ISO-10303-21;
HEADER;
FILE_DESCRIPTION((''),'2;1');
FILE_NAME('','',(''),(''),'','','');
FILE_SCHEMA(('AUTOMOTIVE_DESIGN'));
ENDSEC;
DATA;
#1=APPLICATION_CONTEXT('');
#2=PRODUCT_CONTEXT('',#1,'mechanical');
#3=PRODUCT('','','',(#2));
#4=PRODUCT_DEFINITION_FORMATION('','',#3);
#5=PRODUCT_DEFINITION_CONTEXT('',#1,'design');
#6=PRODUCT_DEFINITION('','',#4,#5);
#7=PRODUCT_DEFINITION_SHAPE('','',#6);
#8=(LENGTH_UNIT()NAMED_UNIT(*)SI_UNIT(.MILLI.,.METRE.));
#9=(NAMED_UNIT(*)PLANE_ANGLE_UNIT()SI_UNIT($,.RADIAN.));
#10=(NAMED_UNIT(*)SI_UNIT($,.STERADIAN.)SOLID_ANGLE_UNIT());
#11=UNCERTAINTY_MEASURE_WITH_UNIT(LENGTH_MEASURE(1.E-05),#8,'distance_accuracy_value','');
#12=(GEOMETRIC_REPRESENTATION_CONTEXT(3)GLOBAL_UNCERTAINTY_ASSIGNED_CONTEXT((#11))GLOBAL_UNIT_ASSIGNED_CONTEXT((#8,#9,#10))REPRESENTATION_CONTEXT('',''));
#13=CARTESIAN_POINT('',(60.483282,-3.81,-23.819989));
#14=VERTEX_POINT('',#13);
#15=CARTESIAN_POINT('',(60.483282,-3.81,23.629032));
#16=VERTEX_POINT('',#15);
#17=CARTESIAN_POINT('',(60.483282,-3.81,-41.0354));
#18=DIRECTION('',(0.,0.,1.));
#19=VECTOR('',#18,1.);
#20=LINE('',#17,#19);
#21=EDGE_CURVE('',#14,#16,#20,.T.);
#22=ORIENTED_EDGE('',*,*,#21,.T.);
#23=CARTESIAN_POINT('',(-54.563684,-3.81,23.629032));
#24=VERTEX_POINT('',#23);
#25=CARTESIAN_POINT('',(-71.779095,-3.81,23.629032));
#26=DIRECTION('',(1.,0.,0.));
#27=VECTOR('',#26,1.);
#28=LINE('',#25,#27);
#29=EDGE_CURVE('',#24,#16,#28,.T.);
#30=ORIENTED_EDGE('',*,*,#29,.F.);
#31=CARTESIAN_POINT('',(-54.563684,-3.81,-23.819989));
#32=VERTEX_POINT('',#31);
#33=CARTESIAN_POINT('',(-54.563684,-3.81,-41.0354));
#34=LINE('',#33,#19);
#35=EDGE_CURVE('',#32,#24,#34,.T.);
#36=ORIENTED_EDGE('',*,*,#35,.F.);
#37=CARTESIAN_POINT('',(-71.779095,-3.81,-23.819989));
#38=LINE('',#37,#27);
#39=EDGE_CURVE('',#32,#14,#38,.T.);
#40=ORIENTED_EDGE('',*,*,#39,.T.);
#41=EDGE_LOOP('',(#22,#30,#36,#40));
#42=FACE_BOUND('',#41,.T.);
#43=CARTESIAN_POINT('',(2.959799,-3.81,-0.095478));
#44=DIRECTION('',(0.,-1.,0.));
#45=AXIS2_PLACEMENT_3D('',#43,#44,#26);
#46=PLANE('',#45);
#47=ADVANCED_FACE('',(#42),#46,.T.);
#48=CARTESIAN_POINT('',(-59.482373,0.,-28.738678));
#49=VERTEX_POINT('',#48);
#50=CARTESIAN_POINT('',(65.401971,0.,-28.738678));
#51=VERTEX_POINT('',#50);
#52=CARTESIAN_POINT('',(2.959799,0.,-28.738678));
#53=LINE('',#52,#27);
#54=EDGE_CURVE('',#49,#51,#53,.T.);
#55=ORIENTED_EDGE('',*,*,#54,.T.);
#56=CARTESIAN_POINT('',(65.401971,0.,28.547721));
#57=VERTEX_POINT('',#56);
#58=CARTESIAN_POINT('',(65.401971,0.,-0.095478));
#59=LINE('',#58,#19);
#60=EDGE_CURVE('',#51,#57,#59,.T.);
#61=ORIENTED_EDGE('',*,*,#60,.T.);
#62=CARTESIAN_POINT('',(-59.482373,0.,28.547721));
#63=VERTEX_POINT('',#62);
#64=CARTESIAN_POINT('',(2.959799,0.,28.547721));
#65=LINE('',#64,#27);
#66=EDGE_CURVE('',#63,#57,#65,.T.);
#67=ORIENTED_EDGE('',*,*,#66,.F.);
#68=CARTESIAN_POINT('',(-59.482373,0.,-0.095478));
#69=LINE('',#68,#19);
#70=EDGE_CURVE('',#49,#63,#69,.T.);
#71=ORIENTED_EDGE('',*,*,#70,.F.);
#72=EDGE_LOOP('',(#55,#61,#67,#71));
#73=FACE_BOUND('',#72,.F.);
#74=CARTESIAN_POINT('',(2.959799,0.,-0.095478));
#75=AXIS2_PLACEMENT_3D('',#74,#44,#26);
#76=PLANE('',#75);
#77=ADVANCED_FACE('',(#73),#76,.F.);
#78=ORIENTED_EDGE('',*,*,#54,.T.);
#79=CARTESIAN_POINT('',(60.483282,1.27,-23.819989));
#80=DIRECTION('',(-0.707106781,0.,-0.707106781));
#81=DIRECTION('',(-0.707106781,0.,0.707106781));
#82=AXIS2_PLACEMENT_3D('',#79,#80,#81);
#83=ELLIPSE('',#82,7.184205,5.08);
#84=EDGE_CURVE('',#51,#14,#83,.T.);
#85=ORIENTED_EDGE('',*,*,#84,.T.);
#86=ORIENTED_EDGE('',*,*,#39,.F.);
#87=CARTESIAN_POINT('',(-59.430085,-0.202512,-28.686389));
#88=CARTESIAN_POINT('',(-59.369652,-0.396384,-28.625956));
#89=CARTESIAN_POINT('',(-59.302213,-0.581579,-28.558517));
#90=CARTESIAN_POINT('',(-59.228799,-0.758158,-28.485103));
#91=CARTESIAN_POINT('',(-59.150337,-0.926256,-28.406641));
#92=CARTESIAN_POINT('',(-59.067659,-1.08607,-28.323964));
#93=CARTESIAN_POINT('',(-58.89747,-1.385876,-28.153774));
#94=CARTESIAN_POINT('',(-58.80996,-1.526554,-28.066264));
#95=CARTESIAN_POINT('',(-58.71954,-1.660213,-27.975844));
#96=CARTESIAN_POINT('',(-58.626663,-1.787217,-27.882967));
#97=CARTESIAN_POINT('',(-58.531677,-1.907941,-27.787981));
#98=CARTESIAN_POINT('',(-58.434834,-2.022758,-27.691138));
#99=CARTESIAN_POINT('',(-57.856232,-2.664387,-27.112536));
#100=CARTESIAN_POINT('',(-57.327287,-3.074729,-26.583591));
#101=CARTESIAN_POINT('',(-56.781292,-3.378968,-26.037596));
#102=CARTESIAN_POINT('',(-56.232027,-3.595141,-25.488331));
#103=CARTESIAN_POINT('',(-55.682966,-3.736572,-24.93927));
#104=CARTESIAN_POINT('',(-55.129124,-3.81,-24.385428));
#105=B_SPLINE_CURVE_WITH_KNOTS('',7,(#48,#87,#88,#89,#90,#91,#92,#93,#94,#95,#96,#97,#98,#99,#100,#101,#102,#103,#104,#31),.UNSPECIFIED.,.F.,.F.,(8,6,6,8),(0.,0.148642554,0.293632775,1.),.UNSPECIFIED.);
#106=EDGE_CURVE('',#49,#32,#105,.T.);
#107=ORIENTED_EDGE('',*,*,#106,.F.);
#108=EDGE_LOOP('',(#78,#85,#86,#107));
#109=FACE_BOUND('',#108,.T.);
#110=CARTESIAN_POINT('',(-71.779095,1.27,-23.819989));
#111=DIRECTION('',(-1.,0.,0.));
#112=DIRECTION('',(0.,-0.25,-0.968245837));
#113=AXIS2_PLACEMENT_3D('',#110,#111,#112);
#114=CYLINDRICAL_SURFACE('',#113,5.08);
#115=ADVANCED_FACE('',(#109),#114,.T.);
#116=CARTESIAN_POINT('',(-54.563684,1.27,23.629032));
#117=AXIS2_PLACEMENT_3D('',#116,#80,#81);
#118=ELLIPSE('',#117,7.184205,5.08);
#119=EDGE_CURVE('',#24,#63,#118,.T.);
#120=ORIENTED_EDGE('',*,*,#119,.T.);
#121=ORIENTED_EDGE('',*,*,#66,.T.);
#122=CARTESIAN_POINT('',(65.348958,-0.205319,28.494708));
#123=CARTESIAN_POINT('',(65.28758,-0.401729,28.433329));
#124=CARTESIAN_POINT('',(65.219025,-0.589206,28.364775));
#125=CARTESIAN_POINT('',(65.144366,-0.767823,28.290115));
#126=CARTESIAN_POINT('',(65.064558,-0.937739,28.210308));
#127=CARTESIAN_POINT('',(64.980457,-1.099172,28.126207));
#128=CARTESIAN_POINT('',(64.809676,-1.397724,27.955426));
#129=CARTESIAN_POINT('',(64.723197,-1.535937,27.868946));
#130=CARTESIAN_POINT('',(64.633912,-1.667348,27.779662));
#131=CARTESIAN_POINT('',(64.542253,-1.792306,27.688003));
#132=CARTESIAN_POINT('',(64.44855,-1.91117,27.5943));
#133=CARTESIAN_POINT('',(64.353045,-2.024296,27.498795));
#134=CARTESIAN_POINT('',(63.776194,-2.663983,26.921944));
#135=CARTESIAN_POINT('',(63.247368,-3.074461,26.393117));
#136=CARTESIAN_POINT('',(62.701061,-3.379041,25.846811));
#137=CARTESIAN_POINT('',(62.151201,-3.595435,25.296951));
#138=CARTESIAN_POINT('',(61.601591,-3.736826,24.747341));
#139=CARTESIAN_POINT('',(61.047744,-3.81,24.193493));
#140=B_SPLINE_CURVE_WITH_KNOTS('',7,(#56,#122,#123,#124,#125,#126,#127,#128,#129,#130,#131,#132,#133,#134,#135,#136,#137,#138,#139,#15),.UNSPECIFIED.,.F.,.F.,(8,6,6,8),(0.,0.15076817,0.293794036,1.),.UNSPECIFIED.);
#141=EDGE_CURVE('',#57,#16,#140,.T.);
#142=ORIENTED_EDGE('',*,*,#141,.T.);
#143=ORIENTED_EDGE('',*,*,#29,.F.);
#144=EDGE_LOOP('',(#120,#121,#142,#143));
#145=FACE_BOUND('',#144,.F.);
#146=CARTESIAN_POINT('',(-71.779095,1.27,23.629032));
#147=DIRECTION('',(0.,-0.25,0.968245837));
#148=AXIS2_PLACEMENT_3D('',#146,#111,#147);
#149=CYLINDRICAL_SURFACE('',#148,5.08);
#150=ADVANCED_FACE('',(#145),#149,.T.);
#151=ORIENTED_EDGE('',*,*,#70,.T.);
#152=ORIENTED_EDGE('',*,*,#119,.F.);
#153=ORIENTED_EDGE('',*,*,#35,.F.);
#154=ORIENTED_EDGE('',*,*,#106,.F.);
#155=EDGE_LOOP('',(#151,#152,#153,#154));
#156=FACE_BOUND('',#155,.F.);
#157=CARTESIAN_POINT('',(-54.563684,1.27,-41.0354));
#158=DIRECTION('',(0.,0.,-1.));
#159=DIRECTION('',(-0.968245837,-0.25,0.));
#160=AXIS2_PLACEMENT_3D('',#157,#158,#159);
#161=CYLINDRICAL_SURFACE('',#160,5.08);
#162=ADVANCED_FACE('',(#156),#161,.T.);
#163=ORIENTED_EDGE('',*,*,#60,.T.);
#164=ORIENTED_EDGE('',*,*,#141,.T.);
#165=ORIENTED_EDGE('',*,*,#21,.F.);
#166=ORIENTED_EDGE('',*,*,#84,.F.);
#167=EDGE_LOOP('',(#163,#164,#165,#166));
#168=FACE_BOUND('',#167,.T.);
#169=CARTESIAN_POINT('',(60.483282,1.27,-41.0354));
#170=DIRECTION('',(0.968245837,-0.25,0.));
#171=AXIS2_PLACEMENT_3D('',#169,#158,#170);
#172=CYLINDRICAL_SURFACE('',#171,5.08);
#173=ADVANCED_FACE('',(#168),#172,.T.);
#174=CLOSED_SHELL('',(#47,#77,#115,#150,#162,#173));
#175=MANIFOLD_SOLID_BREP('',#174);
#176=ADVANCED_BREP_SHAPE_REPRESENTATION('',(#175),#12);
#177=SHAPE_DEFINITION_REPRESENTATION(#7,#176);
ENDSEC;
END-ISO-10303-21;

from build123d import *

# Parameters (mm, degrees)
F0_W        = 124.8843446374
F0_H        = 57.2863984853
F1_DEPTH    = 3.81
F2_T1_DEPTH = 149.4777888858
F2_T3_DEPTH = 81.8798427337


# Not quite as in the source:
# - a fillet or chamfer that OpenCascade refuses, or shapes differently, is made with other operations: its cross-section is extruded or revolved along the edge and cut away or added


with BuildPart() as f1:
    # F0 (on Front) → F1 (new body)
    with BuildSketch(Plane.XZ):
        with Locations((2.9597990215, -0.095478259)):
            Rectangle(F0_W, F0_H)
    extrude(amount=F1_DEPTH)

    # F2: fillet of radius 5.08 on 4 edges, made by hand

    # F2_s2 → F2_t1 (cut)
    with BuildSketch(Plane.YZ.offset(-71.7790954214)):
        with BuildLine():
            ThreePointArc((0, 28.5477209836), (-2.7460926284, 26.7398841073), (-3.81, 23.6290321339))
            Line((-3.81, 23.6290321339), (-3.81, 28.5477209836))
            Line((-3.81, 28.5477209836), (0, 28.5477209836))
        make_face()
        with BuildLine():
            ThreePointArc((0, -28.7386775017), (-2.7460926284, -26.9308406253), (-3.81, -23.819988652))
            Line((-3.81, -23.819988652), (-3.81, -28.7386775017))
            Line((-3.81, -28.7386775017), (0, -28.7386775017))
        make_face()
    extrude(amount=F2_T1_DEPTH, mode=Mode.SUBTRACT)

    # F2_s4 → F2_t3 (cut)
    with BuildSketch(Plane.XY.offset(-41.0353996259)):
        with BuildLine():
            ThreePointArc((-59.4823732972, 0), (-57.6745364209, -2.7460926284), (-54.5636844475, -3.81))
            Line((-54.5636844475, -3.81), (-59.4823732972, -3.81))
            Line((-59.4823732972, -3.81), (-59.4823732972, 0))
        make_face()
        with BuildLine():
            ThreePointArc((65.4019713402, 0), (63.5941344638, -2.7460926284), (60.4832824905, -3.81))
            Line((60.4832824905, -3.81), (65.4019713402, -3.81))
            Line((65.4019713402, -3.81), (65.4019713402, 0))
        make_face()
    extrude(amount=F2_T3_DEPTH, mode=Mode.SUBTRACT)


solid = f1.part
